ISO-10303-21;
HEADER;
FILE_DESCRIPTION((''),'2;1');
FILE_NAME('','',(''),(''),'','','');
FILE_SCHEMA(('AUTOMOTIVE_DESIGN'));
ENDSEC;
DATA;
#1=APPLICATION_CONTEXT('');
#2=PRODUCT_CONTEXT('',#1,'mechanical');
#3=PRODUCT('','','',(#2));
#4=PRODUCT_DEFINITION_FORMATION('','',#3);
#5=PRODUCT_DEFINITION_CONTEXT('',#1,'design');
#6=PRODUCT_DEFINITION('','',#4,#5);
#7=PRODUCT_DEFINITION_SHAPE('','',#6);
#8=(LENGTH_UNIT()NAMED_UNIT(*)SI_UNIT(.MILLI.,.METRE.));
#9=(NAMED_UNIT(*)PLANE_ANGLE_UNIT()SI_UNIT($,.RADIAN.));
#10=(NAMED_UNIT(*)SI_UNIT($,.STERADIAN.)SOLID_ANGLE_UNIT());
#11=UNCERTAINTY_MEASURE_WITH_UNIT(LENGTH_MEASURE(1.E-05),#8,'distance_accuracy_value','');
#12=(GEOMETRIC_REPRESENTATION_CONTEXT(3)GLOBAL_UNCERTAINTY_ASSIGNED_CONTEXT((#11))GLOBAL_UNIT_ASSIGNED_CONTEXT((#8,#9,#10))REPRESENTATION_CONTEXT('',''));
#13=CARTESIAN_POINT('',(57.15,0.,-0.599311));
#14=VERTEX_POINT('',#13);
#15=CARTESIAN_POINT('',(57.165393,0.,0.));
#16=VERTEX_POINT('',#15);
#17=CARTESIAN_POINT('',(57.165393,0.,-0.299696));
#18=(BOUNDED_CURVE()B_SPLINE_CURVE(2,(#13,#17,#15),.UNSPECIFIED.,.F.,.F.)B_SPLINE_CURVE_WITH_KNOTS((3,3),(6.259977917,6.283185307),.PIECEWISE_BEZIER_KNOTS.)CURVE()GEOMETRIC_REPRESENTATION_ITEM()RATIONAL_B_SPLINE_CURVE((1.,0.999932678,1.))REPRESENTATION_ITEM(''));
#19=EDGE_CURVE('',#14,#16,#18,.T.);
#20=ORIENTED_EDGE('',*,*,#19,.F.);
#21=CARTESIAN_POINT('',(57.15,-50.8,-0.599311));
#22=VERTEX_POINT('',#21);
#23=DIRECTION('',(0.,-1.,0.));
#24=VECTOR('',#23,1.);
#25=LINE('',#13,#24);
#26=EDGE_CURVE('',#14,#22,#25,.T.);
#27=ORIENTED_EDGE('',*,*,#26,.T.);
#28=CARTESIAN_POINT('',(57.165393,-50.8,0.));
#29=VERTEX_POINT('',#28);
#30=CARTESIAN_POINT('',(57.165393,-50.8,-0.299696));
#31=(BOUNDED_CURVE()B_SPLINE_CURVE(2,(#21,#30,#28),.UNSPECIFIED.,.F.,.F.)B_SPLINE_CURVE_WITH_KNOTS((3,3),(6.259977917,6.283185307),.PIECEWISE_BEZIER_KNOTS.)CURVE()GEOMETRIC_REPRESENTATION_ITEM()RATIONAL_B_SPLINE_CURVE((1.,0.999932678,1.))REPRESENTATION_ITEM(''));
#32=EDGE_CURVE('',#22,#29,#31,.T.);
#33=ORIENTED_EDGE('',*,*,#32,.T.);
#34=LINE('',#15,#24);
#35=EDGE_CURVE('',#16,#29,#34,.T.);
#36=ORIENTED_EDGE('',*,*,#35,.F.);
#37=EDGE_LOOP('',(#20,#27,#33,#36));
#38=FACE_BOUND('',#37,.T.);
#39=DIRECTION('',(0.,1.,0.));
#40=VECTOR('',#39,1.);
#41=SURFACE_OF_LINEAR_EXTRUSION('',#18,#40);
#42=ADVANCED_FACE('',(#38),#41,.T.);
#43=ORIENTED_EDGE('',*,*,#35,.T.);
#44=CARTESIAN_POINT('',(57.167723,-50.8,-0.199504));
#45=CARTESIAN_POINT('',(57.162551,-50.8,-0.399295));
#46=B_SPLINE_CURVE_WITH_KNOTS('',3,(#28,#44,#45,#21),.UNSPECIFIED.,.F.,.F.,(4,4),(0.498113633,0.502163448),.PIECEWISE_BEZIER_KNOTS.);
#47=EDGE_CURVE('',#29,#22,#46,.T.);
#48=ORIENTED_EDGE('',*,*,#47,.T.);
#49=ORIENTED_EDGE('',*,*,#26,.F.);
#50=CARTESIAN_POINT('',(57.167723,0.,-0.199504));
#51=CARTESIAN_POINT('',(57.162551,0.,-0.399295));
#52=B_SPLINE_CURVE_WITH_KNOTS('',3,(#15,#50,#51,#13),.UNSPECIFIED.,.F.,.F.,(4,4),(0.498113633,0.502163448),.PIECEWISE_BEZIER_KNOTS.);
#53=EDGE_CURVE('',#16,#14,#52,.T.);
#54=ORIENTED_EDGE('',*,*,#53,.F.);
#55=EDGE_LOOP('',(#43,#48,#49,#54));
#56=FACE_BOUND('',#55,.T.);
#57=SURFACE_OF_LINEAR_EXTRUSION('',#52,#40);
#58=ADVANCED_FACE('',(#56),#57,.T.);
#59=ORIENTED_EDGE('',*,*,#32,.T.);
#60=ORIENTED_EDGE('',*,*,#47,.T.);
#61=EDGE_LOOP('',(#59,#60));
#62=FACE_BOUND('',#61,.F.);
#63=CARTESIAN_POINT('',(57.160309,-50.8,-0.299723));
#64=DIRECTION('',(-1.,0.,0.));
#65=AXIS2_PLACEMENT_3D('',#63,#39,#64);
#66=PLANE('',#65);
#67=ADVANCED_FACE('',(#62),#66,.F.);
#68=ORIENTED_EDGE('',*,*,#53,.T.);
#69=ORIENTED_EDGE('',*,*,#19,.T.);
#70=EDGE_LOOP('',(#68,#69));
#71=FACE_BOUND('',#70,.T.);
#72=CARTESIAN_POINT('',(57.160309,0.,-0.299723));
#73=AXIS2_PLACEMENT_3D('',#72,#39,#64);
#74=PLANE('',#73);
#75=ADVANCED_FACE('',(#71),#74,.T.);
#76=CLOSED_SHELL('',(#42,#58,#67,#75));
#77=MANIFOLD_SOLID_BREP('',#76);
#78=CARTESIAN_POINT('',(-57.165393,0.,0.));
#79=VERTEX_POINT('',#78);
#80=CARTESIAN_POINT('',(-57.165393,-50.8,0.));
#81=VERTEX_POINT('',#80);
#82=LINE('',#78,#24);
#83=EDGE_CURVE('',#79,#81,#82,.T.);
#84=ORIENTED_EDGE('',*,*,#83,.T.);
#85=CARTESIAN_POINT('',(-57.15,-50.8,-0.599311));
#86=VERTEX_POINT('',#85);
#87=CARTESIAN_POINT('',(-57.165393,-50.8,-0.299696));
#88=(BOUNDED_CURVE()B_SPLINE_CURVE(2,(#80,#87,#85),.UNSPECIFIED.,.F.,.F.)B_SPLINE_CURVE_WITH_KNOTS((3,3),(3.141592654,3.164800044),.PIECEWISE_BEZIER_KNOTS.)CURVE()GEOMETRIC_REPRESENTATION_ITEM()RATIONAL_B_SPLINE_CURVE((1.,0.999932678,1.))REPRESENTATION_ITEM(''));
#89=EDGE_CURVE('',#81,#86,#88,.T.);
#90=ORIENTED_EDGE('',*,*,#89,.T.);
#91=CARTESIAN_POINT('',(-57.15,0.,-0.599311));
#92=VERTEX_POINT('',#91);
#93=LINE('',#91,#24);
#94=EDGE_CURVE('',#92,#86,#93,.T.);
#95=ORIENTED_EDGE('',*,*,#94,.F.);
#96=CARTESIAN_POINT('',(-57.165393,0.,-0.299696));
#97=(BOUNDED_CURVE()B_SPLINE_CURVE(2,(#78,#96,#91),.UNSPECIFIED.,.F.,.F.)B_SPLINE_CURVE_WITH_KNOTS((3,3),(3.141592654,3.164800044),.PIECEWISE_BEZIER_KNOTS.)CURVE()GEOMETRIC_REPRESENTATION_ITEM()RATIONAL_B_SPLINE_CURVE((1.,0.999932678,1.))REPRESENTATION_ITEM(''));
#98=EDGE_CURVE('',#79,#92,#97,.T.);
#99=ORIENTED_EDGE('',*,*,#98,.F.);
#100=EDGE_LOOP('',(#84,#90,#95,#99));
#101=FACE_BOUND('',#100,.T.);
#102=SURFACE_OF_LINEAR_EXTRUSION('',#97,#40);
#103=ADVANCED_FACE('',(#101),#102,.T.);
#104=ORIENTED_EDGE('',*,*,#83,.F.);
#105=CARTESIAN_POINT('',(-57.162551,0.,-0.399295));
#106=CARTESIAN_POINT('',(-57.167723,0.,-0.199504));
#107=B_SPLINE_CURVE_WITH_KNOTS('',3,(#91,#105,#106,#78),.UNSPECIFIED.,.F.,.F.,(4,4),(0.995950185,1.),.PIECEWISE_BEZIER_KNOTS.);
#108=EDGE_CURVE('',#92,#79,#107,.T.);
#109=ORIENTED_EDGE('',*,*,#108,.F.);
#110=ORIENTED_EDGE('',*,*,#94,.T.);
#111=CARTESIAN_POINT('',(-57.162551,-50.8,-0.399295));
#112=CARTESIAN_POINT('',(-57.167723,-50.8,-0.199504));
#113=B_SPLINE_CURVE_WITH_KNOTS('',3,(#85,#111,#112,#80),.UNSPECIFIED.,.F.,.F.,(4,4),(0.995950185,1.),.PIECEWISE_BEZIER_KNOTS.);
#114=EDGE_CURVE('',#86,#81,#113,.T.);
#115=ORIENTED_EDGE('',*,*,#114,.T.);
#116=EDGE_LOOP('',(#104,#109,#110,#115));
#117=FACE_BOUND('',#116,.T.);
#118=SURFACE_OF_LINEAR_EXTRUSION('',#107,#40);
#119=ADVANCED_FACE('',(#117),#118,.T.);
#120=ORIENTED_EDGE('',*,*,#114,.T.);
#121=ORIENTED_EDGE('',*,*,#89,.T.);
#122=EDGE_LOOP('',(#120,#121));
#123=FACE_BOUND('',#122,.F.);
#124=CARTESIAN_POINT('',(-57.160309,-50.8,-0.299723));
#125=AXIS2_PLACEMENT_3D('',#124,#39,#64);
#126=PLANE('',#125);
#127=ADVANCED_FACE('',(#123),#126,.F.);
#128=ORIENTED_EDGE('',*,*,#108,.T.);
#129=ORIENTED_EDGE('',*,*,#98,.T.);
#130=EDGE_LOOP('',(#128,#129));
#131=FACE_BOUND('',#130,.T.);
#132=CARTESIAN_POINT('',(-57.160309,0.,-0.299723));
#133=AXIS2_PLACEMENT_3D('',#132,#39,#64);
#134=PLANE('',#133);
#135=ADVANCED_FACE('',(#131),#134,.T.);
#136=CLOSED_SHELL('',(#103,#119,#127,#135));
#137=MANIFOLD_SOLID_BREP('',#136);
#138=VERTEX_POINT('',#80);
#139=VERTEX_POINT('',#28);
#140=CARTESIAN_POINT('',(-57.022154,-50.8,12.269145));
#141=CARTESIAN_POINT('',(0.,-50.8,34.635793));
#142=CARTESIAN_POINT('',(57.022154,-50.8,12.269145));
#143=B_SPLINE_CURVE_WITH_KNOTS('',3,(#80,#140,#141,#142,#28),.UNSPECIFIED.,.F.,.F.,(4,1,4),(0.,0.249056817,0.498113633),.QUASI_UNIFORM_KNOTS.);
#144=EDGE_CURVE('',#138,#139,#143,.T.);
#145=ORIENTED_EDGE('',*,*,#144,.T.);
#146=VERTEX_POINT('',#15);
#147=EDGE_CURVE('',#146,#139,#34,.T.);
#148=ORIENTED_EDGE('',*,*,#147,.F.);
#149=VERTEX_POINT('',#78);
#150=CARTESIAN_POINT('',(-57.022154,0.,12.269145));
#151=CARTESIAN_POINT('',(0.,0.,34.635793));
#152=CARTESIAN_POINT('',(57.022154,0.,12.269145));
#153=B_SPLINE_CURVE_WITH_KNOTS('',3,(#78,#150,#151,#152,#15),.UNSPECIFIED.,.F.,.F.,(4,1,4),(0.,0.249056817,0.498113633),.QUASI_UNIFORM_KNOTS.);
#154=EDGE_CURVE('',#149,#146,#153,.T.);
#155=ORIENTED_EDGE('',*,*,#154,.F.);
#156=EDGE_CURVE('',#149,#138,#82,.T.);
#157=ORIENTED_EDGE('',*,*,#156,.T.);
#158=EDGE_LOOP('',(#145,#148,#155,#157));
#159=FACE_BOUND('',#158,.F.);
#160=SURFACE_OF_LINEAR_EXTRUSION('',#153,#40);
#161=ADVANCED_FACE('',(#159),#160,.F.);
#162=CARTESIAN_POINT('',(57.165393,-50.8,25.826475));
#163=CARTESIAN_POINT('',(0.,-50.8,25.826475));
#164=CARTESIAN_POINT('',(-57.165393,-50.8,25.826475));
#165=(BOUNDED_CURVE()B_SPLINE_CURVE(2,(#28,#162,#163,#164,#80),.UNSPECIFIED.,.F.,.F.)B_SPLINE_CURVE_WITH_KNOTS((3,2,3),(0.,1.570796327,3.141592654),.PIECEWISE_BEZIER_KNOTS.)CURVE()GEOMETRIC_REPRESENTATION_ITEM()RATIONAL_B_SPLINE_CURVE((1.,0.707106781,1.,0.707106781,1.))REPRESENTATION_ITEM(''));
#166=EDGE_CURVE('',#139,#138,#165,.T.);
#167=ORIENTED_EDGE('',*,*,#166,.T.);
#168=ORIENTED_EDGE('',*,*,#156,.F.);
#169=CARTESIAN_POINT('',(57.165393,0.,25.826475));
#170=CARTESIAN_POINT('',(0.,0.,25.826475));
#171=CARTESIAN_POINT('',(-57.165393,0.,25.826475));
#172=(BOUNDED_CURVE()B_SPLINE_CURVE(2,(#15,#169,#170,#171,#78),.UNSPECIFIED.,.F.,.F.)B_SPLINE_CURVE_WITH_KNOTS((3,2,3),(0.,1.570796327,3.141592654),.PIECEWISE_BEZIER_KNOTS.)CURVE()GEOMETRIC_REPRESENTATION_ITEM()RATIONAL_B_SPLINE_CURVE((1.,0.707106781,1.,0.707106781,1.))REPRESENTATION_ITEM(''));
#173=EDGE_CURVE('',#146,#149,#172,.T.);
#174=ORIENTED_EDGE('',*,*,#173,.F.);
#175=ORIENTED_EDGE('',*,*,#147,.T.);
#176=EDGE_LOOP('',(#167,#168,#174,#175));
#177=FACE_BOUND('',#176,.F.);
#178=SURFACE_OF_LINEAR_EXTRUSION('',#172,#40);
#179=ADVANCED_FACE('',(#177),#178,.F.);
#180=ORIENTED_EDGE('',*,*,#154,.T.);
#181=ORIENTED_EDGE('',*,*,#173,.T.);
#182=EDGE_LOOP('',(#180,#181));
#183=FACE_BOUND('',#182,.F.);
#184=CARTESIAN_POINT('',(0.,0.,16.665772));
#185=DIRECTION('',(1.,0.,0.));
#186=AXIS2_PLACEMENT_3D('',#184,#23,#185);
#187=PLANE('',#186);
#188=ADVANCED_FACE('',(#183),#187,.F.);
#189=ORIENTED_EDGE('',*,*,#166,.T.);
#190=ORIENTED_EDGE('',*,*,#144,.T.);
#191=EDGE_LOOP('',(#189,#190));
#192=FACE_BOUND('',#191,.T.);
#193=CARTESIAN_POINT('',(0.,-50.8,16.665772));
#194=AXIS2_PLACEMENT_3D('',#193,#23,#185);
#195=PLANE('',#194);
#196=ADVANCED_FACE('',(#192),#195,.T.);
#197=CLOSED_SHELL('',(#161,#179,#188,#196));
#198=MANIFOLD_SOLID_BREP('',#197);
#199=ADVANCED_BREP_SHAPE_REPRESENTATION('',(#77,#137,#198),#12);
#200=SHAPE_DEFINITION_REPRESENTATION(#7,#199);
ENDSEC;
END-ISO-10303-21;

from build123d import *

# Parameters (mm, degrees)
F1_DEPTH = 50.8


with BuildPart() as f1:
    # F0 (on Front) → F1 (new body)
    with BuildSketch(Plane.XZ):
        with BuildLine():
            add(Edge.make_bspline(
                [(-57.1653934626, 0), (-57.1653934626, -0.2996959884), (-57.15, -0.5993112749)],
                knots=[3.1415926536, 3.1415926536, 3.1415926536, 3.1648000438, 3.1648000438, 3.1648000438], degree=2, weights=[1, 0.9999326779, 1]))
            add(Edge.make_bspline(
                [(-57.15, -0.5993112749), (-57.1625511192, -0.3992945688), (-57.1677226229, -0.1995037349), (-57.1653934626, 0)],
                knots=[0.9959501851, 0.9959501851, 0.9959501851, 0.9959501851, 1, 1, 1, 1], degree=3))
        make_face()
    extrude(amount=F1_DEPTH)


with BuildPart() as f1b:
    # F0 (on Front) → F1, piece 2 (new body)
    with BuildSketch(Plane.XZ):
        with BuildLine():
            add(Edge.make_bspline(
                [(57.1653934626, 0), (57.1653934626, 25.8264746088), (0, 25.8264746088), (-57.1653934626, 25.8264746088), (-57.1653934626, 0)],
                knots=[0, 0, 0, 1.5707963268, 1.5707963268, 3.1415926536, 3.1415926536, 3.1415926536], degree=2, weights=[1, 0.7071067812, 1, 0.7071067812, 1]))
            add(Edge.make_bspline(
                [(-57.1653934626, 0), (-57.0221540116, 12.2691447256), (0, 34.6357926861), (57.0221540116, 12.2691447256), (57.1653934626, 0)],
                knots=[0, 0, 0, 0, 0.2490568167, 0.4981136334, 0.4981136334, 0.4981136334, 0.4981136334], degree=3))
        make_face()
    extrude(amount=F1_DEPTH)


with BuildPart() as f1c:
    # F0 (on Front) → F1, piece 3 (new body)
    with BuildSketch(Plane.XZ):
        with BuildLine():
            add(Edge.make_bspline(
                [(57.1653934626, 0), (57.1677226229, -0.1995037349), (57.1625511192, -0.3992945688), (57.15, -0.5993112749)],
                knots=[0.4981136334, 0.4981136334, 0.4981136334, 0.4981136334, 0.5021634483, 0.5021634483, 0.5021634483, 0.5021634483], degree=3))
            add(Edge.make_bspline(
                [(57.15, -0.5993112749), (57.1653934626, -0.2996959884), (57.1653934626, 0)],
                knots=[6.2599779169, 6.2599779169, 6.2599779169, 6.2831853072, 6.2831853072, 6.2831853072], degree=2, weights=[1, 0.9999326779, 1]))
        make_face()
    extrude(amount=F1_DEPTH)


solid = Compound([f1.part, f1b.part, f1c.part])
